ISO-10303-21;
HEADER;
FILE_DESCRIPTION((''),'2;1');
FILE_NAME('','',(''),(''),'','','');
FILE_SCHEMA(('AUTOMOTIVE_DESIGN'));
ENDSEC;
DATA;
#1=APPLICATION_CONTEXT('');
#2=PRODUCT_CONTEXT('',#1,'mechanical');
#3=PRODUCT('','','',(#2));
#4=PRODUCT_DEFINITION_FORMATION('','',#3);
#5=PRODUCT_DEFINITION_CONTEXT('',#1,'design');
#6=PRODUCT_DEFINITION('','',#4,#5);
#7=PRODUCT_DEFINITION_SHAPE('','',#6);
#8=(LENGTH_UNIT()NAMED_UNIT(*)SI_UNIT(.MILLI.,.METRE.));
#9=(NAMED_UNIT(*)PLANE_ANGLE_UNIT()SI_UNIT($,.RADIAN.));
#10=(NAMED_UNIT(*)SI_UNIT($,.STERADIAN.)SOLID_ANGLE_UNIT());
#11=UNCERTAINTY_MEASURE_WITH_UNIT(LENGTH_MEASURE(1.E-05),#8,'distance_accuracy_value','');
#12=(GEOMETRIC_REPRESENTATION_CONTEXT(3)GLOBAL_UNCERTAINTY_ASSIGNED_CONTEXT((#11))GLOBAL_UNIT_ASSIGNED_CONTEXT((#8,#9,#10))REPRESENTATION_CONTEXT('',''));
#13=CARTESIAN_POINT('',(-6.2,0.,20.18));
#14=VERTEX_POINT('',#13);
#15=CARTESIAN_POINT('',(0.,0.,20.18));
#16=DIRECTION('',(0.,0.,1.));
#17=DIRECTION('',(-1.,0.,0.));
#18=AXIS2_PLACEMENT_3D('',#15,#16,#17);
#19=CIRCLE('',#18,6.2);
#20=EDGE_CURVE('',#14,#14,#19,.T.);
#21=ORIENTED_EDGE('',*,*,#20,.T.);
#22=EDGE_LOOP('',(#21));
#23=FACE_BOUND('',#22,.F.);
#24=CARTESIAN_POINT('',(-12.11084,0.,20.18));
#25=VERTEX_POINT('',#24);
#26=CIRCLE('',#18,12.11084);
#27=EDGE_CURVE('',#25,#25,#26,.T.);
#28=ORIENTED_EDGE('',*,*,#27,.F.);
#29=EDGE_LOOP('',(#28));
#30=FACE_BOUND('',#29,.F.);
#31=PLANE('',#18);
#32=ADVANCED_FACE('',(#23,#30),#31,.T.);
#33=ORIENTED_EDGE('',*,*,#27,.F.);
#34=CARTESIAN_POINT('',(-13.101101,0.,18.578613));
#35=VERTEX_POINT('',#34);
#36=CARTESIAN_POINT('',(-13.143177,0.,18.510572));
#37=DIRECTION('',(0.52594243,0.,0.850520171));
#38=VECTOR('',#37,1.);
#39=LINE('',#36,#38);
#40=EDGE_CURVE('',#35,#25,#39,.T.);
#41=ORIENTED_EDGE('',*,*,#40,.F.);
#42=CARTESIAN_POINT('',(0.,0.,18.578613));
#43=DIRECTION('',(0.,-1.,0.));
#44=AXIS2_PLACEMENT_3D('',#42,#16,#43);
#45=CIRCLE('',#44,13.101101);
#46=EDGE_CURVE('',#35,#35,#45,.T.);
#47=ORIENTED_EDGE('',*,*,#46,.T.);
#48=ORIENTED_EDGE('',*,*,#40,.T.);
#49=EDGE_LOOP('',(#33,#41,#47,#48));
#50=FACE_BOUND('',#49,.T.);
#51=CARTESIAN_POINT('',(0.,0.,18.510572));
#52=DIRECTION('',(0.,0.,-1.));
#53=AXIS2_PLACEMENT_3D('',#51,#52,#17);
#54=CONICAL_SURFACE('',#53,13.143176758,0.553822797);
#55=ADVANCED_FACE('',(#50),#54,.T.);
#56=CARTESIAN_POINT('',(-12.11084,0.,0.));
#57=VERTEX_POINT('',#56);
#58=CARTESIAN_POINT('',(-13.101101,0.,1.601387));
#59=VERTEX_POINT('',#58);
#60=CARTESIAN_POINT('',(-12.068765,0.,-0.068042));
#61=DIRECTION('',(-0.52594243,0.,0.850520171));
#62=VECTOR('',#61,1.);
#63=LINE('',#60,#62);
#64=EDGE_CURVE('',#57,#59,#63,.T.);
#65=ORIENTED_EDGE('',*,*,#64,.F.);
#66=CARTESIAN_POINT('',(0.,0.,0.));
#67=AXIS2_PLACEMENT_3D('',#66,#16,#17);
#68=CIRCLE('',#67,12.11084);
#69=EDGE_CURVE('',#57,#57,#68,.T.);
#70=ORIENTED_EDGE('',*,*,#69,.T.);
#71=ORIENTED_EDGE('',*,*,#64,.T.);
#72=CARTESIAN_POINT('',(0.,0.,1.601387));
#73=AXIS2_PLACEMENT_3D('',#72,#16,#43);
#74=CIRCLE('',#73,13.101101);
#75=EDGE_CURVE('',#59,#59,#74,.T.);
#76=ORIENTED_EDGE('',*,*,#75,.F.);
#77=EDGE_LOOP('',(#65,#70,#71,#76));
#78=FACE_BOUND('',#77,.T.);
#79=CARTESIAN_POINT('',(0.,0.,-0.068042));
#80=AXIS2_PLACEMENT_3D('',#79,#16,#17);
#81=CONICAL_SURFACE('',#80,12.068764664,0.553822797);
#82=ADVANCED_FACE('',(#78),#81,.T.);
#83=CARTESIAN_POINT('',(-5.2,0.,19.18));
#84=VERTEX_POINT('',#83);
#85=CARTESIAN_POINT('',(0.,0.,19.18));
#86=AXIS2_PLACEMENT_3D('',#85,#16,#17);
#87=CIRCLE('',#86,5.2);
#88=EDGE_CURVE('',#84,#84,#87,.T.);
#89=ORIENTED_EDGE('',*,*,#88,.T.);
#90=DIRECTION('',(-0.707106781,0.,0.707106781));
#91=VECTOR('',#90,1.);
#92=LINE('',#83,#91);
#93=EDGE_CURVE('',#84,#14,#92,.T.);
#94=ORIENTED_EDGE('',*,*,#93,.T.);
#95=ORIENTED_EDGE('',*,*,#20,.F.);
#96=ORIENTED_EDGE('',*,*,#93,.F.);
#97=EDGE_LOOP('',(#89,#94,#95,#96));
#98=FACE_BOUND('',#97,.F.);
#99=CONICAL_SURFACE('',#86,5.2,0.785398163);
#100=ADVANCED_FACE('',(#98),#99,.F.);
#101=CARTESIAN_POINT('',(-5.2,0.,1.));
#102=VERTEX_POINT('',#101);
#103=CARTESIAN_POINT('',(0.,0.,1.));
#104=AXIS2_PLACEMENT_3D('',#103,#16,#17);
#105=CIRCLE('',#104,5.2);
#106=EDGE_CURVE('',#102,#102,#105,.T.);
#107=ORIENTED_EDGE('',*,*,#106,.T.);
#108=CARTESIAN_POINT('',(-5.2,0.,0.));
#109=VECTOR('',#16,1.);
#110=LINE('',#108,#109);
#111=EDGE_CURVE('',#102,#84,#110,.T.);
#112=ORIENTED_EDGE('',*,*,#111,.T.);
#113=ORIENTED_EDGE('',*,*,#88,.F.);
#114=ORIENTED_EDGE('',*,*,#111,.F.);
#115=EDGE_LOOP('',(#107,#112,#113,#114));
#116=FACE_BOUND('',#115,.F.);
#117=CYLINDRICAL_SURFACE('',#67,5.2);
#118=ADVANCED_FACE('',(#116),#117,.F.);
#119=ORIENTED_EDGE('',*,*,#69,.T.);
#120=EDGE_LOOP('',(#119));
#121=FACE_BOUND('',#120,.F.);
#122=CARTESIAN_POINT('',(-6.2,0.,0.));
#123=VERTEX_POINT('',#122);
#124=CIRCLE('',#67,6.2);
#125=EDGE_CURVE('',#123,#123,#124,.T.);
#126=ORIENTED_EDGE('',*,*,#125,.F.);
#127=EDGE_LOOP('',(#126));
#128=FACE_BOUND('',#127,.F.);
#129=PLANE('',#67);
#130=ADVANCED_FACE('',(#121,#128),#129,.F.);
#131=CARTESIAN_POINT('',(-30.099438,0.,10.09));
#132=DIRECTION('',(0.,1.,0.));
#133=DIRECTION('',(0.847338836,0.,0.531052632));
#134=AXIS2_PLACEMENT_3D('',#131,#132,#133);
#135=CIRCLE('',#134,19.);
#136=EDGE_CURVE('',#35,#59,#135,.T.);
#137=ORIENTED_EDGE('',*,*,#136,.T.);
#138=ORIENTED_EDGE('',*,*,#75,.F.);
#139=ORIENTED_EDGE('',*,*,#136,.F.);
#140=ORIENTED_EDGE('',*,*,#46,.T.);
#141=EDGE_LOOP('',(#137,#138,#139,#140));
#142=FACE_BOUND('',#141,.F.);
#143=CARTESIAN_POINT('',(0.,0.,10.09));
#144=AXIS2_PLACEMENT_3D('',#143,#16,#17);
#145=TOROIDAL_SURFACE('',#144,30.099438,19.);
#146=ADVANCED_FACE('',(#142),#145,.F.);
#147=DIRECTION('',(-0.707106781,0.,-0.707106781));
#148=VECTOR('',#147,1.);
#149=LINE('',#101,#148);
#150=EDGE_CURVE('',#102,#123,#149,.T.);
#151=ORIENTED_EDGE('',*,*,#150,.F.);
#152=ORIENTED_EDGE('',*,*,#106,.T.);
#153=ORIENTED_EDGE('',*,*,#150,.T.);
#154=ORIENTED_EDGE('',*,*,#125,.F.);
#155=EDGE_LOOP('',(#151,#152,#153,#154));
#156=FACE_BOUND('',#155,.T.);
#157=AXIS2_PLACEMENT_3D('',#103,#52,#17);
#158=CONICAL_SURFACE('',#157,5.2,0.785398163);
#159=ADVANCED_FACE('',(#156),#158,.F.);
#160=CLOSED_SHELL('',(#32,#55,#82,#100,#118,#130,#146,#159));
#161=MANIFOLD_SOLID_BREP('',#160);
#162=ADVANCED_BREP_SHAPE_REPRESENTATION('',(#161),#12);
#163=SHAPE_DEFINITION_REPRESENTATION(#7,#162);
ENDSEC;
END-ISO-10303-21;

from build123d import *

# Parameters (mm, degrees)
F2_SIZE = 1


# Not quite as in the source:
# - a fillet or chamfer that OpenCascade refuses, or shapes differently, is made with other operations: its cross-section is extruded or revolved along the edge and cut away or added


with BuildPart() as f1:
    # F0 (on Front) → F1 (revolve)
    with BuildSketch(Plane.XZ):
        with BuildLine():
            Line((-5.2, 0), (-5.2, 20.18))
            Line((-5.2, 20.18), (-14, 20.18))
            ThreePointArc((-14, 20.18), (-11.0994378784, 10.09), (-14, 0))
            Line((-14, 0), (-5.2, 0))
        make_face()
    revolve(axis=Axis((0, 0, 10.09), (0, 0, 1)))

    # F2
    f2_edges = [f1.edges().sort_by_distance(p)[0] for p in [
        (5.2, 0, 0),
        (5.2, 0, 20.18),
        (-5.2, 0, 10.09),
    ]]
    chamfer(f2_edges, length=F2_SIZE)

    # F3: chamfer of 2 on 3 edges, made by hand

    # F3_s1 → F3_t2 (revolve, cut)
    with BuildSketch(Plane.XZ):
        with BuildLine():
            Line((-13.1431767576, 18.5105716839), (-12.0687646644, 20.2480416136))
            Line((-12.0687646644, 20.2480416136), (-12.0687646644, 20.2880416136))
            ThreePointArc((-12.0687646644, 20.2880416136), (-13.0343823322, 20.22), (-14, 20.22))
            Line((-14, 20.22), (-14.0338935534, 20.1587578947))
            ThreePointArc((-14.0338935534, 20.1587578947), (-13.556591594, 19.3536837603), (-13.1789627292, 18.4927009191))
            Line((-13.1789627292, 18.4927009191), (-13.1431767576, 18.5105716839))
        make_face()
    revolve(axis=Axis((0, 0, 20.18), (0, 0, 1)), mode=Mode.SUBTRACT)

    # F3_s3 → F3_t4 (revolve, cut)
    with BuildSketch(Plane.XZ):
        with BuildLine():
            Line((-12.0687646644, -0.0680416136), (-13.1431767576, 1.6694283161))
            Line((-13.1431767576, 1.6694283161), (-13.1789627292, 1.6872990809))
            ThreePointArc((-13.1789627292, 1.6872990809), (-13.556591594, 0.8263162397), (-14.0338935534, 0.0212421053))
            Line((-14.0338935534, 0.0212421053), (-14, -0.04))
            ThreePointArc((-14, -0.04), (-13.0343823322, -0.04), (-12.0687646644, -0.1080416136))
            Line((-12.0687646644, -0.1080416136), (-12.0687646644, -0.0680416136))
        make_face()
    revolve(axis=Axis((0, 0, 0), (0, 0, 1)), mode=Mode.SUBTRACT)


solid = f1.part
